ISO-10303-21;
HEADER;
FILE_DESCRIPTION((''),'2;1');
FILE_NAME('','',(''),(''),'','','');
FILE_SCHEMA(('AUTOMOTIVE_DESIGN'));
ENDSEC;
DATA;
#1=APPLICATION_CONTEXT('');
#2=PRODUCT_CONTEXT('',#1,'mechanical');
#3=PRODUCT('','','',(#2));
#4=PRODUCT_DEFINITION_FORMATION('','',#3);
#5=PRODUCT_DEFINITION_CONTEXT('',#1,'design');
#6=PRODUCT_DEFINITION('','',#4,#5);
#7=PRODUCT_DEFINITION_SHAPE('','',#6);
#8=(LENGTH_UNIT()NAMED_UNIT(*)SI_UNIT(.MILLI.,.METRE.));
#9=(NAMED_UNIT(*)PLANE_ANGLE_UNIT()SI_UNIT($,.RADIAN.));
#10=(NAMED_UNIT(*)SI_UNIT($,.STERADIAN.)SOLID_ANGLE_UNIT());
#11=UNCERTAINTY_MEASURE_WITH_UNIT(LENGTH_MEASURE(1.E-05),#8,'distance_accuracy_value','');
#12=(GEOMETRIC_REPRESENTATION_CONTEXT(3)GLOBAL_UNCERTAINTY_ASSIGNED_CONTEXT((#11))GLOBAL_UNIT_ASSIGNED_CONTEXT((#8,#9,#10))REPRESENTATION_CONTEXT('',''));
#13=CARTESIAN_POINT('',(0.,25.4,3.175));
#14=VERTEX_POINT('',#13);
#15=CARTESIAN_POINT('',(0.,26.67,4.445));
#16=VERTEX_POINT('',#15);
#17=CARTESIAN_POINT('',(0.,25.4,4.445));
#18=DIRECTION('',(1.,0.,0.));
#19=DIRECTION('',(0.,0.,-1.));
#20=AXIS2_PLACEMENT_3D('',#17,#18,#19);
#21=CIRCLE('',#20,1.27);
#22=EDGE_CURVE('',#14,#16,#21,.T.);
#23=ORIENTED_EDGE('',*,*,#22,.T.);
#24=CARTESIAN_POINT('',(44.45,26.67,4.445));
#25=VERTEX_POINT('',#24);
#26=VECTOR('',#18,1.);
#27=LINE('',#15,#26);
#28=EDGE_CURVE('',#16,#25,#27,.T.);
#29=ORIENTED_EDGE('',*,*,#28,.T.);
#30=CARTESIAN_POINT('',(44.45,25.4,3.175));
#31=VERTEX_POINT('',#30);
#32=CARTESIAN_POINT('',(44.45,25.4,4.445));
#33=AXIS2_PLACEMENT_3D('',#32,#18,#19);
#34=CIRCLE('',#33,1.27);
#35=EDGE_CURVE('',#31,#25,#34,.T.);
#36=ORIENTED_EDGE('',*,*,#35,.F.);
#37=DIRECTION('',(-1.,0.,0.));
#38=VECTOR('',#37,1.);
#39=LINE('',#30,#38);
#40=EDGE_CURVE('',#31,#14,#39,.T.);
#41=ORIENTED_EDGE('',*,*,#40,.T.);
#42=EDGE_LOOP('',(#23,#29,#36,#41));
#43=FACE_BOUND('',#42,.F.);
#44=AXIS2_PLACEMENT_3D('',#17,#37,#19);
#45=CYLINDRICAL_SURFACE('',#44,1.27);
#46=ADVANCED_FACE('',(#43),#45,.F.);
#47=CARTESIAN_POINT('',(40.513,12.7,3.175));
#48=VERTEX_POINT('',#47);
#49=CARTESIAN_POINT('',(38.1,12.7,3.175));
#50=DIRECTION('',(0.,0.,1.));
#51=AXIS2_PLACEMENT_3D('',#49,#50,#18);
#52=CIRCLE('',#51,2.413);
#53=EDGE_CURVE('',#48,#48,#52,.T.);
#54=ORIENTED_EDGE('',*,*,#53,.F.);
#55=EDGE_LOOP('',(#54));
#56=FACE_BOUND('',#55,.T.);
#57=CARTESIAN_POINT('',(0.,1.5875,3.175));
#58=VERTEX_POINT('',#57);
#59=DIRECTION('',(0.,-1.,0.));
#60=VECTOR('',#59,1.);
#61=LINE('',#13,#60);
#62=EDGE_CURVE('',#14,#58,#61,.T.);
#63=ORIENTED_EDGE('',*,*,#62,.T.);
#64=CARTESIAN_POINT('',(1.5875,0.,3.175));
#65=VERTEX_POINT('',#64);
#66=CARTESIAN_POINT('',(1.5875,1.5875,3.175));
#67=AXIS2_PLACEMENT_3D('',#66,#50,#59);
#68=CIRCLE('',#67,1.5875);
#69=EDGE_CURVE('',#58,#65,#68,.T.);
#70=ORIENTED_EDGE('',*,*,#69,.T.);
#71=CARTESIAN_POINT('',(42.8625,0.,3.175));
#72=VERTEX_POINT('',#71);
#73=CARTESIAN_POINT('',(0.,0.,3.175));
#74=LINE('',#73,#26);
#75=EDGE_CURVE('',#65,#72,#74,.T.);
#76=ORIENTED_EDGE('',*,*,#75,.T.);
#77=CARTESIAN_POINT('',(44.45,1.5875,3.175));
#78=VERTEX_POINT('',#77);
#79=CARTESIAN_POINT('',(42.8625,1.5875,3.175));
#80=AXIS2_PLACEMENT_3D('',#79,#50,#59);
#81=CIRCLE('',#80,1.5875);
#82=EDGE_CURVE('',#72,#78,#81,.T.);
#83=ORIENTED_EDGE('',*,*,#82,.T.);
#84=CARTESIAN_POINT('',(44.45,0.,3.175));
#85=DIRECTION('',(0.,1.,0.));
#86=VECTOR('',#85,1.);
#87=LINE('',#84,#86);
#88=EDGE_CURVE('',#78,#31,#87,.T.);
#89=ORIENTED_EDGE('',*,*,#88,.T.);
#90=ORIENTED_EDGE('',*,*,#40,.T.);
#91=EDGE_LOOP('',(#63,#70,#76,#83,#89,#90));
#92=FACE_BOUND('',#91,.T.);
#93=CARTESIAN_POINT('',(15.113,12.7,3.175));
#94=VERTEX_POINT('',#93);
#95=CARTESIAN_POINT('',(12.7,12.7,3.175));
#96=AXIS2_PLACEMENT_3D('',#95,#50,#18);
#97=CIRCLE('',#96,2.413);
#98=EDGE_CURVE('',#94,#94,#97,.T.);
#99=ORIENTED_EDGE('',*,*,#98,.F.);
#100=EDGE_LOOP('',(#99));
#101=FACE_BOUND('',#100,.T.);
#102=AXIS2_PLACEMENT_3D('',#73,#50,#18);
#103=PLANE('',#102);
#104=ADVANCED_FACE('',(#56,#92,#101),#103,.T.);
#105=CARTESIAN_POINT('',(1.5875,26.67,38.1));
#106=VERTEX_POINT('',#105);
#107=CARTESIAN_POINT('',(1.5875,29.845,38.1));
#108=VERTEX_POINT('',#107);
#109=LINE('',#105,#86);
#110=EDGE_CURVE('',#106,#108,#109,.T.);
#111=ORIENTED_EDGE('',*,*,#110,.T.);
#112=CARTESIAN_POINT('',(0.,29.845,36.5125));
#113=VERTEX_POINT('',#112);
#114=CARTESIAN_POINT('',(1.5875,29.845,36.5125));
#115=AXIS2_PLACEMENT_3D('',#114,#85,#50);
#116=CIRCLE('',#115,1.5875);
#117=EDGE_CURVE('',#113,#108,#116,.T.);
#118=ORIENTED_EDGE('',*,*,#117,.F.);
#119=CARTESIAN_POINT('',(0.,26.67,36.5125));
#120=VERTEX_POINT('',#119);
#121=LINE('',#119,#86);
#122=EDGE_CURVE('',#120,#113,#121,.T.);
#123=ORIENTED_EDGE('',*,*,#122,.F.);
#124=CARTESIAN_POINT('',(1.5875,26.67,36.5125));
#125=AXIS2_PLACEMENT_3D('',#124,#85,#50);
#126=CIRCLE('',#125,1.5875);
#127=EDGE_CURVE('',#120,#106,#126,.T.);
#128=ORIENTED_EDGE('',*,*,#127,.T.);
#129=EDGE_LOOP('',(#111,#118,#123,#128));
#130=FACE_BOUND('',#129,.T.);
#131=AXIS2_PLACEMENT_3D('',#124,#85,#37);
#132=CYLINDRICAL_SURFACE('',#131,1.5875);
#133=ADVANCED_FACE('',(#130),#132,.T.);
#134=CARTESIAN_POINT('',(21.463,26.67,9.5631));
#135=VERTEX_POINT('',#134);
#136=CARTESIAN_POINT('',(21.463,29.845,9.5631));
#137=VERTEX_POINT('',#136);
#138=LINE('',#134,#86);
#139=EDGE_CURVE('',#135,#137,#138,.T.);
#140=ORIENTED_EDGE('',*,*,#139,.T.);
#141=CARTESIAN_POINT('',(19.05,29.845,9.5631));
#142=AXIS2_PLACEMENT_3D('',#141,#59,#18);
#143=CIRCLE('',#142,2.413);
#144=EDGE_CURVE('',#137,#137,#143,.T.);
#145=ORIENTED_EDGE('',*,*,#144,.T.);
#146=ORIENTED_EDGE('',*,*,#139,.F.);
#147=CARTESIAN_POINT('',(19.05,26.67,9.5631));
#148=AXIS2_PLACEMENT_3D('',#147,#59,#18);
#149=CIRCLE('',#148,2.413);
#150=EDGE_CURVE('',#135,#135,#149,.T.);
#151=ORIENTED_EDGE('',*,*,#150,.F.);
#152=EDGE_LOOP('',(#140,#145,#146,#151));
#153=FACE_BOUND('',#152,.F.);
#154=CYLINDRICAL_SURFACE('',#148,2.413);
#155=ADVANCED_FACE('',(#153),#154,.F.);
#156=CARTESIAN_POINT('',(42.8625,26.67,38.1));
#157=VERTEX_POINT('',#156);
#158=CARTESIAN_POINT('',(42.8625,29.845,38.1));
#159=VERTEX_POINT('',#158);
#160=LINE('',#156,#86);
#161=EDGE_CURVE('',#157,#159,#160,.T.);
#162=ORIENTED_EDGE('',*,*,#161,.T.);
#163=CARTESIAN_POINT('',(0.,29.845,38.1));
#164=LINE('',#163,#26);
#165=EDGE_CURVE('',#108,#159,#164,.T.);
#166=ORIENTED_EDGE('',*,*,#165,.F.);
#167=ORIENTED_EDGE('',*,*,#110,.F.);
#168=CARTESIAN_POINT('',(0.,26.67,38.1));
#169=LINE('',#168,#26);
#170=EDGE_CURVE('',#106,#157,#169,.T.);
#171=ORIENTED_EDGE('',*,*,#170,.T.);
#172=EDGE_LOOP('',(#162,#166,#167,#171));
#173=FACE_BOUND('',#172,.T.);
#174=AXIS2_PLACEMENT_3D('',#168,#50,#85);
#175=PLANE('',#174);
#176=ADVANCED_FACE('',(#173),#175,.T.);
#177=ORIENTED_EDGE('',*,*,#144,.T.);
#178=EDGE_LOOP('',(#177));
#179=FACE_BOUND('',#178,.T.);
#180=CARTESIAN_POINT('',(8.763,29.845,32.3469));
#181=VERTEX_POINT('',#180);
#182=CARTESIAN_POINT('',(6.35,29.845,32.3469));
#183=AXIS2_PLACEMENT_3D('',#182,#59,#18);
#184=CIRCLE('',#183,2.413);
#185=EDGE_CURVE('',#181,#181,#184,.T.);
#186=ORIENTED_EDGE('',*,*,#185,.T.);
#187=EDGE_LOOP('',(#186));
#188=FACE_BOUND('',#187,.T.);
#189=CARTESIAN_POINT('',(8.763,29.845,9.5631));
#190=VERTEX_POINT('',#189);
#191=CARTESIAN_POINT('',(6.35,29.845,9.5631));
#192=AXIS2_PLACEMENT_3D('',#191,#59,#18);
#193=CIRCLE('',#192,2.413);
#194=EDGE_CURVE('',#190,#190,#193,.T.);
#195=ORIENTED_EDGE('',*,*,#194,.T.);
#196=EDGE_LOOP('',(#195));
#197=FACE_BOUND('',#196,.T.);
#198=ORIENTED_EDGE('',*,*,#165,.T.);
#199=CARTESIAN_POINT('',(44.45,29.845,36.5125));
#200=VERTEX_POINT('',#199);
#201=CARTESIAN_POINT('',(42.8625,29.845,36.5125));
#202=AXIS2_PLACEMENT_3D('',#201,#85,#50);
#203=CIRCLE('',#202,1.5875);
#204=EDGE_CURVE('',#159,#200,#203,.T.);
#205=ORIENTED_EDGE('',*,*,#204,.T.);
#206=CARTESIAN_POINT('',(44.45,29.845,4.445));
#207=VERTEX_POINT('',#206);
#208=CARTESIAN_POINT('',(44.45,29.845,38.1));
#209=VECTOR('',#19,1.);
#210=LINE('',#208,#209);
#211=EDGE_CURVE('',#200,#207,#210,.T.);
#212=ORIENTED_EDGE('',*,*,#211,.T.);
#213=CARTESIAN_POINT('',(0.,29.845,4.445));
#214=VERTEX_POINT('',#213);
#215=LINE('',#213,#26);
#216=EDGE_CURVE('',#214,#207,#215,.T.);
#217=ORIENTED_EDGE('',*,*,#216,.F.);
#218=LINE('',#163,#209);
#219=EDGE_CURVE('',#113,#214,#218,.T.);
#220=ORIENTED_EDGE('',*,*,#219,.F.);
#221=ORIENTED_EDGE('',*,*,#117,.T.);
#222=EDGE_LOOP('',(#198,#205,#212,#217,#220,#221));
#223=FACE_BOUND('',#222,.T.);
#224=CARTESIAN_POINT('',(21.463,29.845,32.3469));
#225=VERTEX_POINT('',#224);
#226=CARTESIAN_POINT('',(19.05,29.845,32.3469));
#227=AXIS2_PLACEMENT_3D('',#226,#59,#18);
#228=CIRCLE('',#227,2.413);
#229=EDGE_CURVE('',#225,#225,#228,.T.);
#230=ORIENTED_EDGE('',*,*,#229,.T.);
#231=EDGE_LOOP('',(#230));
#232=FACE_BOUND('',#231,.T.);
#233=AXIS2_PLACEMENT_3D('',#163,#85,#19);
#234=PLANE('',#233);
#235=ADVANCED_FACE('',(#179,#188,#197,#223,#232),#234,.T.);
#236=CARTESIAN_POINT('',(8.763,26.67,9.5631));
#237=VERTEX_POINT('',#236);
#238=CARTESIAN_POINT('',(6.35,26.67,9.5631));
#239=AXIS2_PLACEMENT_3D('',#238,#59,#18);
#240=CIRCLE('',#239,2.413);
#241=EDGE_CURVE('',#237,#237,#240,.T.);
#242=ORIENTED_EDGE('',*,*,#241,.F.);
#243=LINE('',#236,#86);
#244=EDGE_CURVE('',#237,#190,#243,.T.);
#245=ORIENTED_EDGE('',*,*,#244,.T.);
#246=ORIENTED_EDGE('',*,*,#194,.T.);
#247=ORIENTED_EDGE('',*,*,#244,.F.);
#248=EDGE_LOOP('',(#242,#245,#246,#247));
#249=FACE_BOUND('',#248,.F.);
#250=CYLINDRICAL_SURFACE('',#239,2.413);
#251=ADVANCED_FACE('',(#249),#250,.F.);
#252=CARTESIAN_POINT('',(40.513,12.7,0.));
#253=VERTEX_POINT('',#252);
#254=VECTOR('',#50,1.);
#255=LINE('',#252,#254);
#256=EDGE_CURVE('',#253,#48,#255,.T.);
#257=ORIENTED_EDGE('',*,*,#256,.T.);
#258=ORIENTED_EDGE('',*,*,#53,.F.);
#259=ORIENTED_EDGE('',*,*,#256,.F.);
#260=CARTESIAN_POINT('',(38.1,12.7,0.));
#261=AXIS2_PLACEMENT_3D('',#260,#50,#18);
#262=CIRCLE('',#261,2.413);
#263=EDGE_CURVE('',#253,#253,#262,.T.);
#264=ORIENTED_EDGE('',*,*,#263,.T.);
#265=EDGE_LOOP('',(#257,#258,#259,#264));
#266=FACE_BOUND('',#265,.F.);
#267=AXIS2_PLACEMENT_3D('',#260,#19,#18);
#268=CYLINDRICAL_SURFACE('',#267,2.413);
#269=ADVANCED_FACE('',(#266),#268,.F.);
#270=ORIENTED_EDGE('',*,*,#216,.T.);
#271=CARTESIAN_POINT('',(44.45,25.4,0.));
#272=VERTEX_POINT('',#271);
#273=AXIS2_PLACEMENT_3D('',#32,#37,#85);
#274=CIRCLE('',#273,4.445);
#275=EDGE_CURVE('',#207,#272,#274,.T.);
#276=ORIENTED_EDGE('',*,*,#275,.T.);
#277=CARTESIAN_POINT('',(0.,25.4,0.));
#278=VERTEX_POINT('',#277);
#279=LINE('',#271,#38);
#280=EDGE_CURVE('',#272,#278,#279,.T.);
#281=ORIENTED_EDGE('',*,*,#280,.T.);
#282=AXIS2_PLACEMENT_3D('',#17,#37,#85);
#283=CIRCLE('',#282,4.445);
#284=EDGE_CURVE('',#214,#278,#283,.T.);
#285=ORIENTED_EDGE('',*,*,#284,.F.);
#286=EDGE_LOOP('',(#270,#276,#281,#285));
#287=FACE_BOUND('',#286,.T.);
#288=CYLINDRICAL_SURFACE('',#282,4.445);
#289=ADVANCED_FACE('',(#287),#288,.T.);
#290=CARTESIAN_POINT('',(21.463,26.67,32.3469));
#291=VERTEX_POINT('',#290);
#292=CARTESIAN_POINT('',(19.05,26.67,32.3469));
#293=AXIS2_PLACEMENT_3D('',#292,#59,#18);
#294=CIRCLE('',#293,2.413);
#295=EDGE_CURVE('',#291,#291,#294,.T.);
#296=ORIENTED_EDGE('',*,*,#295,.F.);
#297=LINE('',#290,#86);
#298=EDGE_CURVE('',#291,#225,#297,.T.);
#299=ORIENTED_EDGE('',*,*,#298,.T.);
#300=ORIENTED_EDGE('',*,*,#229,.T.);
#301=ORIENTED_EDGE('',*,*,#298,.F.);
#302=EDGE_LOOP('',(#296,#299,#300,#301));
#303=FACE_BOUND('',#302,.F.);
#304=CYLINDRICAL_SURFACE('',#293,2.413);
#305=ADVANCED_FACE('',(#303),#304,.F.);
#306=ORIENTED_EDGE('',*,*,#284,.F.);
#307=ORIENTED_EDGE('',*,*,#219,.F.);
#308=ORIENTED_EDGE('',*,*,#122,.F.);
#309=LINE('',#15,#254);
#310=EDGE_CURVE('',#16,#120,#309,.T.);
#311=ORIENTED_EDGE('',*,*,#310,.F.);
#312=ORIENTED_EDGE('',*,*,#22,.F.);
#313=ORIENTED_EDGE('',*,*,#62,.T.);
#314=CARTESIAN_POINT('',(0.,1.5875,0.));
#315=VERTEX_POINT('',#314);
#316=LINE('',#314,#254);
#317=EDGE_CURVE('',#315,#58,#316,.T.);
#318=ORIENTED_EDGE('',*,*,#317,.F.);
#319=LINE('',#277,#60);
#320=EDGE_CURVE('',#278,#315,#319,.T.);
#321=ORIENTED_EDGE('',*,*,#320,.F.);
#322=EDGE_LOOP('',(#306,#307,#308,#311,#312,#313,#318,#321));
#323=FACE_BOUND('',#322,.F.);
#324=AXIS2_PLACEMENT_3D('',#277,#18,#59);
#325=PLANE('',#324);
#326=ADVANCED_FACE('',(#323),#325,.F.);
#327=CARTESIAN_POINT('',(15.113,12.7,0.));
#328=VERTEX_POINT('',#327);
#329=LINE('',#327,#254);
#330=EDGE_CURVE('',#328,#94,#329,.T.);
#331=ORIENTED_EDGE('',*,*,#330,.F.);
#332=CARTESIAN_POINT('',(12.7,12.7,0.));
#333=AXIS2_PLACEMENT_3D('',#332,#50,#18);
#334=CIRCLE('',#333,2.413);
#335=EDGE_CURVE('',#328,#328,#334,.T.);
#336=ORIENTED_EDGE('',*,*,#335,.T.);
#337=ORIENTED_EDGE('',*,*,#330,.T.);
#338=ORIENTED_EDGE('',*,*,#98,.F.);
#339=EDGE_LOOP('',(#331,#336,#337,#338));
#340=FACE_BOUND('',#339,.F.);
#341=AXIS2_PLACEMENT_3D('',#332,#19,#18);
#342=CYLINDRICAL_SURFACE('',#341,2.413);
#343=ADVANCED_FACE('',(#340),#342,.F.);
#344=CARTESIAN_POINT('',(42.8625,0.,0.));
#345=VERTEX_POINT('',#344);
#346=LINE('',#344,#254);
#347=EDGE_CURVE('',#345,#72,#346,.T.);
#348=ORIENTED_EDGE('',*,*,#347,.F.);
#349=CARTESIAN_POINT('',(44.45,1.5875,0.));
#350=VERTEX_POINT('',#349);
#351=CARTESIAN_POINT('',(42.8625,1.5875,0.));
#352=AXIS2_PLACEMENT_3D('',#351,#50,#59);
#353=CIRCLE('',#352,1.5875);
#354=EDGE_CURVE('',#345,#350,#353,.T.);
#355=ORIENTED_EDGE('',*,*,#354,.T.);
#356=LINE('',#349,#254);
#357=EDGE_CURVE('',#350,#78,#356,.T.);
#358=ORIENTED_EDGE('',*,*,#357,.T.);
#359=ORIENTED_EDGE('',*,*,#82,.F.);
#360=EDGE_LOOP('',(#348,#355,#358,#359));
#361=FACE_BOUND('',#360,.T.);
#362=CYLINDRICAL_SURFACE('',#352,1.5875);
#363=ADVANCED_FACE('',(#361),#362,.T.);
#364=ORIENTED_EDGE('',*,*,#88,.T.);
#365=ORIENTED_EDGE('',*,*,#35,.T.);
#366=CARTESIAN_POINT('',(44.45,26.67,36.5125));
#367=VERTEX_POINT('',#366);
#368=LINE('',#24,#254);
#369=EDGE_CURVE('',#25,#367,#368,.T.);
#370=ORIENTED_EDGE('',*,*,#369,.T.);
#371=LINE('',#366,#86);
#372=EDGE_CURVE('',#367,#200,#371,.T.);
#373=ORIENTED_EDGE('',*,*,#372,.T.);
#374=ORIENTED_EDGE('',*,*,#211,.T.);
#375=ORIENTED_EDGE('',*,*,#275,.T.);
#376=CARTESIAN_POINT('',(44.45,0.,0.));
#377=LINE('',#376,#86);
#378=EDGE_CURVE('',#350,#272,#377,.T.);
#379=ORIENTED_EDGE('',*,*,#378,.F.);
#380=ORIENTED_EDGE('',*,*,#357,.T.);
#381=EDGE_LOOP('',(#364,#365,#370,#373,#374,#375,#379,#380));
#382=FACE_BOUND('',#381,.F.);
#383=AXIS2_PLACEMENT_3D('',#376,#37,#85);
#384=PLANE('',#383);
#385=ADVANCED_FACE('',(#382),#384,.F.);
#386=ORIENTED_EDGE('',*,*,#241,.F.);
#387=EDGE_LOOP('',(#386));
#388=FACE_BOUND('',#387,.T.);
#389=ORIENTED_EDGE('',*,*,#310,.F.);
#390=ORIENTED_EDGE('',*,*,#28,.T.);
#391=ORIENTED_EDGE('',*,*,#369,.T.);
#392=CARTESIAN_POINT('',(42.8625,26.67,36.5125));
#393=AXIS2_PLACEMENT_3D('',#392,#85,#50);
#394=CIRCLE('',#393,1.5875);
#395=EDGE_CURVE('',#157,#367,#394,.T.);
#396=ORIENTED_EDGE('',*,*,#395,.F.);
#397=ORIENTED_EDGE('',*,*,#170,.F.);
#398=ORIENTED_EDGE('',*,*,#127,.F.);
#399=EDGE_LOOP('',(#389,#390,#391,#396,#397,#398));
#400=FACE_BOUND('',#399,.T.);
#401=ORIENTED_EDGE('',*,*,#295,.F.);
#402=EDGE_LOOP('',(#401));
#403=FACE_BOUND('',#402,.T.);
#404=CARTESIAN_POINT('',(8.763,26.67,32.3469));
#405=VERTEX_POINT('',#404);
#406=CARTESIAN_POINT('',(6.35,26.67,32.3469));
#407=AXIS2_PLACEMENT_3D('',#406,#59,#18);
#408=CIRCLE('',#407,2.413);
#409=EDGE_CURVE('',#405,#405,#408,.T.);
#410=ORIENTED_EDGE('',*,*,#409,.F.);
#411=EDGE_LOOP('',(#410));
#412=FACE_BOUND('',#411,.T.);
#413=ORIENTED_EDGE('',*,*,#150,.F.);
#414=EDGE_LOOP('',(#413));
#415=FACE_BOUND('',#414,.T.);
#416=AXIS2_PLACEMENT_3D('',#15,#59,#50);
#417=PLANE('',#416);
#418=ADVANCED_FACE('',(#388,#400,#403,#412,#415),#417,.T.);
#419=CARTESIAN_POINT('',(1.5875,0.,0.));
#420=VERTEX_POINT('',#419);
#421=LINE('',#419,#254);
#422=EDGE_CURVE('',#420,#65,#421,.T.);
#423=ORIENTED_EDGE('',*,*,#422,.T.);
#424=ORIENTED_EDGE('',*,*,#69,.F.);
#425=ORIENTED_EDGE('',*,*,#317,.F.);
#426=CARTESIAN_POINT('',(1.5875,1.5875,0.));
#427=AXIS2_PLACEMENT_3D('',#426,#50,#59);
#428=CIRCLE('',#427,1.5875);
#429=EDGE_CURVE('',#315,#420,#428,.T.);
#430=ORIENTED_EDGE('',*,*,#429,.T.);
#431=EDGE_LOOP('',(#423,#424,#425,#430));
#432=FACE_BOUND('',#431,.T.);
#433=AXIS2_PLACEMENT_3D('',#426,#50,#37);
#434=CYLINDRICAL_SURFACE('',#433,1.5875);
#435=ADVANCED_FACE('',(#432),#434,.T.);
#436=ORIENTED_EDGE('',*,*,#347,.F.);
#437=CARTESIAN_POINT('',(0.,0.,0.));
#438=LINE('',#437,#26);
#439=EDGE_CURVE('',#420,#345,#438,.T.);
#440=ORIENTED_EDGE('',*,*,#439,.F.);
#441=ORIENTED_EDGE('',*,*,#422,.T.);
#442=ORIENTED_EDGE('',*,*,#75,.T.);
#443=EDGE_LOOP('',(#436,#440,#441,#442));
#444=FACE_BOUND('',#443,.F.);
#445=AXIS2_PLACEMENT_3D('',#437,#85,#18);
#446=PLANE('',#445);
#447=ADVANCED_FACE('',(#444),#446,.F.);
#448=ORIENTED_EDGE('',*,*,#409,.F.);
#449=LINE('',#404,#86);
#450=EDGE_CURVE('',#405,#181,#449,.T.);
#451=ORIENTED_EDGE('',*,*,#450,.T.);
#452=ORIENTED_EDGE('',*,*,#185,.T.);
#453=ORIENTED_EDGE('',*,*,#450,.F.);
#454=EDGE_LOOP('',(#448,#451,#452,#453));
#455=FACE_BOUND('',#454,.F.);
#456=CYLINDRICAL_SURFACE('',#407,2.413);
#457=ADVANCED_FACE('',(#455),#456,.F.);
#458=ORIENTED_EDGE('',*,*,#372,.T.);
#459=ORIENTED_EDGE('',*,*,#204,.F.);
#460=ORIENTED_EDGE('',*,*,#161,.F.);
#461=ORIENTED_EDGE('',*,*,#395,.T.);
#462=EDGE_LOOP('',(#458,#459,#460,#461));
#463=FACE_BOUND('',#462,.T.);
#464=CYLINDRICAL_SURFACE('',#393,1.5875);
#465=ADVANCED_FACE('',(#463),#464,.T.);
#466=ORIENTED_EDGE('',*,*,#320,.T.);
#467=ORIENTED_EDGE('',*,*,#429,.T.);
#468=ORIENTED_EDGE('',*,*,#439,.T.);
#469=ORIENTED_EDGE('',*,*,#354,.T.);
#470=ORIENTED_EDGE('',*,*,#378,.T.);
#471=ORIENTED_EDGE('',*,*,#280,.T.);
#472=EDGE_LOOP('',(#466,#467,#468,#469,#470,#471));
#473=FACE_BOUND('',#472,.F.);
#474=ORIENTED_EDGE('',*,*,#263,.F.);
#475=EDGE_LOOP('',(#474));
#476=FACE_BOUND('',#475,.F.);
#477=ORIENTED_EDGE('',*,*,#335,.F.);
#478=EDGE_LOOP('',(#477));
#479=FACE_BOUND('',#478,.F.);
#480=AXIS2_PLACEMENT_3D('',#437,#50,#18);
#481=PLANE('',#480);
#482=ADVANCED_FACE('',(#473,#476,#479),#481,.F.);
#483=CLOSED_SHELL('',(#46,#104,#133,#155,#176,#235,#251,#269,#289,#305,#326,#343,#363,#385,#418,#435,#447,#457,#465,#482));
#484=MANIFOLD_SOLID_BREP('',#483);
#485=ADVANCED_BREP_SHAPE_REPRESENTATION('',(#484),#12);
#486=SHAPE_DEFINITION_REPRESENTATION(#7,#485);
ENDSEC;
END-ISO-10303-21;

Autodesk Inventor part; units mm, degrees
ref_plane "YZ Plane" through (0, 0, 0) normal (1, 0, 0) x (0, 1, 0)
ref_plane "XZ Plane" through (0, 0, 0) normal (0, 1, 0) x (-1, 0, 0)
ref_plane "XY Plane" through (0, 0, 0) normal (0, 0, 1) x (1, 0, 0)
sketch "Sketch1" plane through (0, 0, 0) normal (0, 0, 1) x (1, 0, 0)
  line L0 (0, 0) -> (44.45, 0)
  line L1 (44.45, 0) -> (44.45, 25.4)
  line L2 (44.45, 25.4) -> (0, 25.4)
  line L3 (0, 25.4) -> (0, 0)
  circle A0 centre (12.7, 12.7) radius 2.413
  line L4 (0, 12.7) -> (44.45, 12.7) construction
  circle A1 centre (38.1, 12.7) radius 2.413
  dimension "d0" = 44.45
  dimension "d1" = 25.4
  dimension "d2" = 4.826
  dimension "d6" = 25.4
  dimension "d32" = 6.35
extrude "Plate1" add sketch "Sketch1" along normal blind 3.175
sketch "Sketch2" plane through (0, 26.67, 4.445) normal (0, 1, 0) x (-1, 0, 0)
  line L0 (-44.45, 0) -> (0, 0)
  line L1 (0, 0) -> (0, 33.655)
  line L2 (0, 33.655) -> (-44.45, 33.655)
  line L3 (-44.45, 33.655) -> (-44.45, 0)
edge flange "Flange1" height 38.1 angle 90 thickness 3.175 bend radius 1.27 thickness toward (0, 1, 0) relief tear relief width 3.175 relief depth 1.5875 edges at (22.225, 25.4, 3.175) wall of the first edge with corners at (44.45, 26.67, 4.445) (0, 26.67, 4.445) (0, 26.67, 38.1) (44.45, 26.67, 38.1)
bend "Bend1"
corner "Corner1"
fillet "Fillet1" radius 1.5875 4 edges at (44.45, 0, 1.5875) (0, 0, 1.5875) (44.45, 28.2575, 38.1) (0, 28.2575, 38.1)
sketch "Sketch3" plane through (0, 26.67, 4.445) normal (0, -1, 0) x (1, 0, 0)
  line L0 (3.175, 33.655) -> (22.225, 33.655) construction
  line L1 (22.225, 33.655) -> (22.225, -0.635) construction
  line L2 (22.225, -0.635) -> (3.175, -0.635) construction
  line L3 (3.175, -0.635) -> (3.175, 33.655) construction
  circle A0 centre (19.05, 27.9019) radius 2.413
  line L4 (12.7, 33.655) -> (12.7, -0.635) construction
  line L5 (3.175, 16.51) -> (22.225, 16.51) construction
  circle A1 centre (6.35, 27.9019) radius 2.413
  circle A2 centre (19.05, 5.1181) radius 2.413
  circle A3 centre (6.35, 5.1181) radius 2.413
  line L6 (44.45, 32.0675) -> (44.45, 0) projected
  line L7 (42.8625, 33.655) -> (1.5875, 33.655) projected
  point P0 (0, -4.445)
  dimension "d23" = 34.29
  dimension "d24" = 19.05
  dimension "d27" = 4.826
  dimension "d28" = 3.175
  dimension "d29" = 5.7531
  dimension "d33" = 22.225
extrude "Extrusion1" cut sketch "Sketch3" against normal blind 25.4
equation "\"d12\" = BendReliefWidth"
equation "\"d13\" = BendReliefDepth"
equation "\"d14\" = MinimumRemnant"
equation "\"d15\" = BendRadius"
equation "\"d19\" = CornerReliefSize"
equation "\"d20\" = GapSize"
equation "\"d21\" = JacobiRadiusSize"
equation "\"BendRadius\" = Thickness"
equation "\"BendReliefWidth\" = Thickness"
equation "\"BendReliefDepth\" = 0.5 * Thickness"
equation "\"CornerReliefSize\" = 4 * Thickness"
equation "\"MinimumRemnant\" = 2 * Thickness"
equation "\"TransitionRadius\" = BendRadius"
equation "\"JacobiRadiusSize\" = BendRadius"
equation "\"GapSize\" = Thickness"
equation "\"d11\" = BendRadius"
equation "\"Thickness\" = 3.175"
properties part number "Pneumatic Piston Back Flange (Rt Custom)"
